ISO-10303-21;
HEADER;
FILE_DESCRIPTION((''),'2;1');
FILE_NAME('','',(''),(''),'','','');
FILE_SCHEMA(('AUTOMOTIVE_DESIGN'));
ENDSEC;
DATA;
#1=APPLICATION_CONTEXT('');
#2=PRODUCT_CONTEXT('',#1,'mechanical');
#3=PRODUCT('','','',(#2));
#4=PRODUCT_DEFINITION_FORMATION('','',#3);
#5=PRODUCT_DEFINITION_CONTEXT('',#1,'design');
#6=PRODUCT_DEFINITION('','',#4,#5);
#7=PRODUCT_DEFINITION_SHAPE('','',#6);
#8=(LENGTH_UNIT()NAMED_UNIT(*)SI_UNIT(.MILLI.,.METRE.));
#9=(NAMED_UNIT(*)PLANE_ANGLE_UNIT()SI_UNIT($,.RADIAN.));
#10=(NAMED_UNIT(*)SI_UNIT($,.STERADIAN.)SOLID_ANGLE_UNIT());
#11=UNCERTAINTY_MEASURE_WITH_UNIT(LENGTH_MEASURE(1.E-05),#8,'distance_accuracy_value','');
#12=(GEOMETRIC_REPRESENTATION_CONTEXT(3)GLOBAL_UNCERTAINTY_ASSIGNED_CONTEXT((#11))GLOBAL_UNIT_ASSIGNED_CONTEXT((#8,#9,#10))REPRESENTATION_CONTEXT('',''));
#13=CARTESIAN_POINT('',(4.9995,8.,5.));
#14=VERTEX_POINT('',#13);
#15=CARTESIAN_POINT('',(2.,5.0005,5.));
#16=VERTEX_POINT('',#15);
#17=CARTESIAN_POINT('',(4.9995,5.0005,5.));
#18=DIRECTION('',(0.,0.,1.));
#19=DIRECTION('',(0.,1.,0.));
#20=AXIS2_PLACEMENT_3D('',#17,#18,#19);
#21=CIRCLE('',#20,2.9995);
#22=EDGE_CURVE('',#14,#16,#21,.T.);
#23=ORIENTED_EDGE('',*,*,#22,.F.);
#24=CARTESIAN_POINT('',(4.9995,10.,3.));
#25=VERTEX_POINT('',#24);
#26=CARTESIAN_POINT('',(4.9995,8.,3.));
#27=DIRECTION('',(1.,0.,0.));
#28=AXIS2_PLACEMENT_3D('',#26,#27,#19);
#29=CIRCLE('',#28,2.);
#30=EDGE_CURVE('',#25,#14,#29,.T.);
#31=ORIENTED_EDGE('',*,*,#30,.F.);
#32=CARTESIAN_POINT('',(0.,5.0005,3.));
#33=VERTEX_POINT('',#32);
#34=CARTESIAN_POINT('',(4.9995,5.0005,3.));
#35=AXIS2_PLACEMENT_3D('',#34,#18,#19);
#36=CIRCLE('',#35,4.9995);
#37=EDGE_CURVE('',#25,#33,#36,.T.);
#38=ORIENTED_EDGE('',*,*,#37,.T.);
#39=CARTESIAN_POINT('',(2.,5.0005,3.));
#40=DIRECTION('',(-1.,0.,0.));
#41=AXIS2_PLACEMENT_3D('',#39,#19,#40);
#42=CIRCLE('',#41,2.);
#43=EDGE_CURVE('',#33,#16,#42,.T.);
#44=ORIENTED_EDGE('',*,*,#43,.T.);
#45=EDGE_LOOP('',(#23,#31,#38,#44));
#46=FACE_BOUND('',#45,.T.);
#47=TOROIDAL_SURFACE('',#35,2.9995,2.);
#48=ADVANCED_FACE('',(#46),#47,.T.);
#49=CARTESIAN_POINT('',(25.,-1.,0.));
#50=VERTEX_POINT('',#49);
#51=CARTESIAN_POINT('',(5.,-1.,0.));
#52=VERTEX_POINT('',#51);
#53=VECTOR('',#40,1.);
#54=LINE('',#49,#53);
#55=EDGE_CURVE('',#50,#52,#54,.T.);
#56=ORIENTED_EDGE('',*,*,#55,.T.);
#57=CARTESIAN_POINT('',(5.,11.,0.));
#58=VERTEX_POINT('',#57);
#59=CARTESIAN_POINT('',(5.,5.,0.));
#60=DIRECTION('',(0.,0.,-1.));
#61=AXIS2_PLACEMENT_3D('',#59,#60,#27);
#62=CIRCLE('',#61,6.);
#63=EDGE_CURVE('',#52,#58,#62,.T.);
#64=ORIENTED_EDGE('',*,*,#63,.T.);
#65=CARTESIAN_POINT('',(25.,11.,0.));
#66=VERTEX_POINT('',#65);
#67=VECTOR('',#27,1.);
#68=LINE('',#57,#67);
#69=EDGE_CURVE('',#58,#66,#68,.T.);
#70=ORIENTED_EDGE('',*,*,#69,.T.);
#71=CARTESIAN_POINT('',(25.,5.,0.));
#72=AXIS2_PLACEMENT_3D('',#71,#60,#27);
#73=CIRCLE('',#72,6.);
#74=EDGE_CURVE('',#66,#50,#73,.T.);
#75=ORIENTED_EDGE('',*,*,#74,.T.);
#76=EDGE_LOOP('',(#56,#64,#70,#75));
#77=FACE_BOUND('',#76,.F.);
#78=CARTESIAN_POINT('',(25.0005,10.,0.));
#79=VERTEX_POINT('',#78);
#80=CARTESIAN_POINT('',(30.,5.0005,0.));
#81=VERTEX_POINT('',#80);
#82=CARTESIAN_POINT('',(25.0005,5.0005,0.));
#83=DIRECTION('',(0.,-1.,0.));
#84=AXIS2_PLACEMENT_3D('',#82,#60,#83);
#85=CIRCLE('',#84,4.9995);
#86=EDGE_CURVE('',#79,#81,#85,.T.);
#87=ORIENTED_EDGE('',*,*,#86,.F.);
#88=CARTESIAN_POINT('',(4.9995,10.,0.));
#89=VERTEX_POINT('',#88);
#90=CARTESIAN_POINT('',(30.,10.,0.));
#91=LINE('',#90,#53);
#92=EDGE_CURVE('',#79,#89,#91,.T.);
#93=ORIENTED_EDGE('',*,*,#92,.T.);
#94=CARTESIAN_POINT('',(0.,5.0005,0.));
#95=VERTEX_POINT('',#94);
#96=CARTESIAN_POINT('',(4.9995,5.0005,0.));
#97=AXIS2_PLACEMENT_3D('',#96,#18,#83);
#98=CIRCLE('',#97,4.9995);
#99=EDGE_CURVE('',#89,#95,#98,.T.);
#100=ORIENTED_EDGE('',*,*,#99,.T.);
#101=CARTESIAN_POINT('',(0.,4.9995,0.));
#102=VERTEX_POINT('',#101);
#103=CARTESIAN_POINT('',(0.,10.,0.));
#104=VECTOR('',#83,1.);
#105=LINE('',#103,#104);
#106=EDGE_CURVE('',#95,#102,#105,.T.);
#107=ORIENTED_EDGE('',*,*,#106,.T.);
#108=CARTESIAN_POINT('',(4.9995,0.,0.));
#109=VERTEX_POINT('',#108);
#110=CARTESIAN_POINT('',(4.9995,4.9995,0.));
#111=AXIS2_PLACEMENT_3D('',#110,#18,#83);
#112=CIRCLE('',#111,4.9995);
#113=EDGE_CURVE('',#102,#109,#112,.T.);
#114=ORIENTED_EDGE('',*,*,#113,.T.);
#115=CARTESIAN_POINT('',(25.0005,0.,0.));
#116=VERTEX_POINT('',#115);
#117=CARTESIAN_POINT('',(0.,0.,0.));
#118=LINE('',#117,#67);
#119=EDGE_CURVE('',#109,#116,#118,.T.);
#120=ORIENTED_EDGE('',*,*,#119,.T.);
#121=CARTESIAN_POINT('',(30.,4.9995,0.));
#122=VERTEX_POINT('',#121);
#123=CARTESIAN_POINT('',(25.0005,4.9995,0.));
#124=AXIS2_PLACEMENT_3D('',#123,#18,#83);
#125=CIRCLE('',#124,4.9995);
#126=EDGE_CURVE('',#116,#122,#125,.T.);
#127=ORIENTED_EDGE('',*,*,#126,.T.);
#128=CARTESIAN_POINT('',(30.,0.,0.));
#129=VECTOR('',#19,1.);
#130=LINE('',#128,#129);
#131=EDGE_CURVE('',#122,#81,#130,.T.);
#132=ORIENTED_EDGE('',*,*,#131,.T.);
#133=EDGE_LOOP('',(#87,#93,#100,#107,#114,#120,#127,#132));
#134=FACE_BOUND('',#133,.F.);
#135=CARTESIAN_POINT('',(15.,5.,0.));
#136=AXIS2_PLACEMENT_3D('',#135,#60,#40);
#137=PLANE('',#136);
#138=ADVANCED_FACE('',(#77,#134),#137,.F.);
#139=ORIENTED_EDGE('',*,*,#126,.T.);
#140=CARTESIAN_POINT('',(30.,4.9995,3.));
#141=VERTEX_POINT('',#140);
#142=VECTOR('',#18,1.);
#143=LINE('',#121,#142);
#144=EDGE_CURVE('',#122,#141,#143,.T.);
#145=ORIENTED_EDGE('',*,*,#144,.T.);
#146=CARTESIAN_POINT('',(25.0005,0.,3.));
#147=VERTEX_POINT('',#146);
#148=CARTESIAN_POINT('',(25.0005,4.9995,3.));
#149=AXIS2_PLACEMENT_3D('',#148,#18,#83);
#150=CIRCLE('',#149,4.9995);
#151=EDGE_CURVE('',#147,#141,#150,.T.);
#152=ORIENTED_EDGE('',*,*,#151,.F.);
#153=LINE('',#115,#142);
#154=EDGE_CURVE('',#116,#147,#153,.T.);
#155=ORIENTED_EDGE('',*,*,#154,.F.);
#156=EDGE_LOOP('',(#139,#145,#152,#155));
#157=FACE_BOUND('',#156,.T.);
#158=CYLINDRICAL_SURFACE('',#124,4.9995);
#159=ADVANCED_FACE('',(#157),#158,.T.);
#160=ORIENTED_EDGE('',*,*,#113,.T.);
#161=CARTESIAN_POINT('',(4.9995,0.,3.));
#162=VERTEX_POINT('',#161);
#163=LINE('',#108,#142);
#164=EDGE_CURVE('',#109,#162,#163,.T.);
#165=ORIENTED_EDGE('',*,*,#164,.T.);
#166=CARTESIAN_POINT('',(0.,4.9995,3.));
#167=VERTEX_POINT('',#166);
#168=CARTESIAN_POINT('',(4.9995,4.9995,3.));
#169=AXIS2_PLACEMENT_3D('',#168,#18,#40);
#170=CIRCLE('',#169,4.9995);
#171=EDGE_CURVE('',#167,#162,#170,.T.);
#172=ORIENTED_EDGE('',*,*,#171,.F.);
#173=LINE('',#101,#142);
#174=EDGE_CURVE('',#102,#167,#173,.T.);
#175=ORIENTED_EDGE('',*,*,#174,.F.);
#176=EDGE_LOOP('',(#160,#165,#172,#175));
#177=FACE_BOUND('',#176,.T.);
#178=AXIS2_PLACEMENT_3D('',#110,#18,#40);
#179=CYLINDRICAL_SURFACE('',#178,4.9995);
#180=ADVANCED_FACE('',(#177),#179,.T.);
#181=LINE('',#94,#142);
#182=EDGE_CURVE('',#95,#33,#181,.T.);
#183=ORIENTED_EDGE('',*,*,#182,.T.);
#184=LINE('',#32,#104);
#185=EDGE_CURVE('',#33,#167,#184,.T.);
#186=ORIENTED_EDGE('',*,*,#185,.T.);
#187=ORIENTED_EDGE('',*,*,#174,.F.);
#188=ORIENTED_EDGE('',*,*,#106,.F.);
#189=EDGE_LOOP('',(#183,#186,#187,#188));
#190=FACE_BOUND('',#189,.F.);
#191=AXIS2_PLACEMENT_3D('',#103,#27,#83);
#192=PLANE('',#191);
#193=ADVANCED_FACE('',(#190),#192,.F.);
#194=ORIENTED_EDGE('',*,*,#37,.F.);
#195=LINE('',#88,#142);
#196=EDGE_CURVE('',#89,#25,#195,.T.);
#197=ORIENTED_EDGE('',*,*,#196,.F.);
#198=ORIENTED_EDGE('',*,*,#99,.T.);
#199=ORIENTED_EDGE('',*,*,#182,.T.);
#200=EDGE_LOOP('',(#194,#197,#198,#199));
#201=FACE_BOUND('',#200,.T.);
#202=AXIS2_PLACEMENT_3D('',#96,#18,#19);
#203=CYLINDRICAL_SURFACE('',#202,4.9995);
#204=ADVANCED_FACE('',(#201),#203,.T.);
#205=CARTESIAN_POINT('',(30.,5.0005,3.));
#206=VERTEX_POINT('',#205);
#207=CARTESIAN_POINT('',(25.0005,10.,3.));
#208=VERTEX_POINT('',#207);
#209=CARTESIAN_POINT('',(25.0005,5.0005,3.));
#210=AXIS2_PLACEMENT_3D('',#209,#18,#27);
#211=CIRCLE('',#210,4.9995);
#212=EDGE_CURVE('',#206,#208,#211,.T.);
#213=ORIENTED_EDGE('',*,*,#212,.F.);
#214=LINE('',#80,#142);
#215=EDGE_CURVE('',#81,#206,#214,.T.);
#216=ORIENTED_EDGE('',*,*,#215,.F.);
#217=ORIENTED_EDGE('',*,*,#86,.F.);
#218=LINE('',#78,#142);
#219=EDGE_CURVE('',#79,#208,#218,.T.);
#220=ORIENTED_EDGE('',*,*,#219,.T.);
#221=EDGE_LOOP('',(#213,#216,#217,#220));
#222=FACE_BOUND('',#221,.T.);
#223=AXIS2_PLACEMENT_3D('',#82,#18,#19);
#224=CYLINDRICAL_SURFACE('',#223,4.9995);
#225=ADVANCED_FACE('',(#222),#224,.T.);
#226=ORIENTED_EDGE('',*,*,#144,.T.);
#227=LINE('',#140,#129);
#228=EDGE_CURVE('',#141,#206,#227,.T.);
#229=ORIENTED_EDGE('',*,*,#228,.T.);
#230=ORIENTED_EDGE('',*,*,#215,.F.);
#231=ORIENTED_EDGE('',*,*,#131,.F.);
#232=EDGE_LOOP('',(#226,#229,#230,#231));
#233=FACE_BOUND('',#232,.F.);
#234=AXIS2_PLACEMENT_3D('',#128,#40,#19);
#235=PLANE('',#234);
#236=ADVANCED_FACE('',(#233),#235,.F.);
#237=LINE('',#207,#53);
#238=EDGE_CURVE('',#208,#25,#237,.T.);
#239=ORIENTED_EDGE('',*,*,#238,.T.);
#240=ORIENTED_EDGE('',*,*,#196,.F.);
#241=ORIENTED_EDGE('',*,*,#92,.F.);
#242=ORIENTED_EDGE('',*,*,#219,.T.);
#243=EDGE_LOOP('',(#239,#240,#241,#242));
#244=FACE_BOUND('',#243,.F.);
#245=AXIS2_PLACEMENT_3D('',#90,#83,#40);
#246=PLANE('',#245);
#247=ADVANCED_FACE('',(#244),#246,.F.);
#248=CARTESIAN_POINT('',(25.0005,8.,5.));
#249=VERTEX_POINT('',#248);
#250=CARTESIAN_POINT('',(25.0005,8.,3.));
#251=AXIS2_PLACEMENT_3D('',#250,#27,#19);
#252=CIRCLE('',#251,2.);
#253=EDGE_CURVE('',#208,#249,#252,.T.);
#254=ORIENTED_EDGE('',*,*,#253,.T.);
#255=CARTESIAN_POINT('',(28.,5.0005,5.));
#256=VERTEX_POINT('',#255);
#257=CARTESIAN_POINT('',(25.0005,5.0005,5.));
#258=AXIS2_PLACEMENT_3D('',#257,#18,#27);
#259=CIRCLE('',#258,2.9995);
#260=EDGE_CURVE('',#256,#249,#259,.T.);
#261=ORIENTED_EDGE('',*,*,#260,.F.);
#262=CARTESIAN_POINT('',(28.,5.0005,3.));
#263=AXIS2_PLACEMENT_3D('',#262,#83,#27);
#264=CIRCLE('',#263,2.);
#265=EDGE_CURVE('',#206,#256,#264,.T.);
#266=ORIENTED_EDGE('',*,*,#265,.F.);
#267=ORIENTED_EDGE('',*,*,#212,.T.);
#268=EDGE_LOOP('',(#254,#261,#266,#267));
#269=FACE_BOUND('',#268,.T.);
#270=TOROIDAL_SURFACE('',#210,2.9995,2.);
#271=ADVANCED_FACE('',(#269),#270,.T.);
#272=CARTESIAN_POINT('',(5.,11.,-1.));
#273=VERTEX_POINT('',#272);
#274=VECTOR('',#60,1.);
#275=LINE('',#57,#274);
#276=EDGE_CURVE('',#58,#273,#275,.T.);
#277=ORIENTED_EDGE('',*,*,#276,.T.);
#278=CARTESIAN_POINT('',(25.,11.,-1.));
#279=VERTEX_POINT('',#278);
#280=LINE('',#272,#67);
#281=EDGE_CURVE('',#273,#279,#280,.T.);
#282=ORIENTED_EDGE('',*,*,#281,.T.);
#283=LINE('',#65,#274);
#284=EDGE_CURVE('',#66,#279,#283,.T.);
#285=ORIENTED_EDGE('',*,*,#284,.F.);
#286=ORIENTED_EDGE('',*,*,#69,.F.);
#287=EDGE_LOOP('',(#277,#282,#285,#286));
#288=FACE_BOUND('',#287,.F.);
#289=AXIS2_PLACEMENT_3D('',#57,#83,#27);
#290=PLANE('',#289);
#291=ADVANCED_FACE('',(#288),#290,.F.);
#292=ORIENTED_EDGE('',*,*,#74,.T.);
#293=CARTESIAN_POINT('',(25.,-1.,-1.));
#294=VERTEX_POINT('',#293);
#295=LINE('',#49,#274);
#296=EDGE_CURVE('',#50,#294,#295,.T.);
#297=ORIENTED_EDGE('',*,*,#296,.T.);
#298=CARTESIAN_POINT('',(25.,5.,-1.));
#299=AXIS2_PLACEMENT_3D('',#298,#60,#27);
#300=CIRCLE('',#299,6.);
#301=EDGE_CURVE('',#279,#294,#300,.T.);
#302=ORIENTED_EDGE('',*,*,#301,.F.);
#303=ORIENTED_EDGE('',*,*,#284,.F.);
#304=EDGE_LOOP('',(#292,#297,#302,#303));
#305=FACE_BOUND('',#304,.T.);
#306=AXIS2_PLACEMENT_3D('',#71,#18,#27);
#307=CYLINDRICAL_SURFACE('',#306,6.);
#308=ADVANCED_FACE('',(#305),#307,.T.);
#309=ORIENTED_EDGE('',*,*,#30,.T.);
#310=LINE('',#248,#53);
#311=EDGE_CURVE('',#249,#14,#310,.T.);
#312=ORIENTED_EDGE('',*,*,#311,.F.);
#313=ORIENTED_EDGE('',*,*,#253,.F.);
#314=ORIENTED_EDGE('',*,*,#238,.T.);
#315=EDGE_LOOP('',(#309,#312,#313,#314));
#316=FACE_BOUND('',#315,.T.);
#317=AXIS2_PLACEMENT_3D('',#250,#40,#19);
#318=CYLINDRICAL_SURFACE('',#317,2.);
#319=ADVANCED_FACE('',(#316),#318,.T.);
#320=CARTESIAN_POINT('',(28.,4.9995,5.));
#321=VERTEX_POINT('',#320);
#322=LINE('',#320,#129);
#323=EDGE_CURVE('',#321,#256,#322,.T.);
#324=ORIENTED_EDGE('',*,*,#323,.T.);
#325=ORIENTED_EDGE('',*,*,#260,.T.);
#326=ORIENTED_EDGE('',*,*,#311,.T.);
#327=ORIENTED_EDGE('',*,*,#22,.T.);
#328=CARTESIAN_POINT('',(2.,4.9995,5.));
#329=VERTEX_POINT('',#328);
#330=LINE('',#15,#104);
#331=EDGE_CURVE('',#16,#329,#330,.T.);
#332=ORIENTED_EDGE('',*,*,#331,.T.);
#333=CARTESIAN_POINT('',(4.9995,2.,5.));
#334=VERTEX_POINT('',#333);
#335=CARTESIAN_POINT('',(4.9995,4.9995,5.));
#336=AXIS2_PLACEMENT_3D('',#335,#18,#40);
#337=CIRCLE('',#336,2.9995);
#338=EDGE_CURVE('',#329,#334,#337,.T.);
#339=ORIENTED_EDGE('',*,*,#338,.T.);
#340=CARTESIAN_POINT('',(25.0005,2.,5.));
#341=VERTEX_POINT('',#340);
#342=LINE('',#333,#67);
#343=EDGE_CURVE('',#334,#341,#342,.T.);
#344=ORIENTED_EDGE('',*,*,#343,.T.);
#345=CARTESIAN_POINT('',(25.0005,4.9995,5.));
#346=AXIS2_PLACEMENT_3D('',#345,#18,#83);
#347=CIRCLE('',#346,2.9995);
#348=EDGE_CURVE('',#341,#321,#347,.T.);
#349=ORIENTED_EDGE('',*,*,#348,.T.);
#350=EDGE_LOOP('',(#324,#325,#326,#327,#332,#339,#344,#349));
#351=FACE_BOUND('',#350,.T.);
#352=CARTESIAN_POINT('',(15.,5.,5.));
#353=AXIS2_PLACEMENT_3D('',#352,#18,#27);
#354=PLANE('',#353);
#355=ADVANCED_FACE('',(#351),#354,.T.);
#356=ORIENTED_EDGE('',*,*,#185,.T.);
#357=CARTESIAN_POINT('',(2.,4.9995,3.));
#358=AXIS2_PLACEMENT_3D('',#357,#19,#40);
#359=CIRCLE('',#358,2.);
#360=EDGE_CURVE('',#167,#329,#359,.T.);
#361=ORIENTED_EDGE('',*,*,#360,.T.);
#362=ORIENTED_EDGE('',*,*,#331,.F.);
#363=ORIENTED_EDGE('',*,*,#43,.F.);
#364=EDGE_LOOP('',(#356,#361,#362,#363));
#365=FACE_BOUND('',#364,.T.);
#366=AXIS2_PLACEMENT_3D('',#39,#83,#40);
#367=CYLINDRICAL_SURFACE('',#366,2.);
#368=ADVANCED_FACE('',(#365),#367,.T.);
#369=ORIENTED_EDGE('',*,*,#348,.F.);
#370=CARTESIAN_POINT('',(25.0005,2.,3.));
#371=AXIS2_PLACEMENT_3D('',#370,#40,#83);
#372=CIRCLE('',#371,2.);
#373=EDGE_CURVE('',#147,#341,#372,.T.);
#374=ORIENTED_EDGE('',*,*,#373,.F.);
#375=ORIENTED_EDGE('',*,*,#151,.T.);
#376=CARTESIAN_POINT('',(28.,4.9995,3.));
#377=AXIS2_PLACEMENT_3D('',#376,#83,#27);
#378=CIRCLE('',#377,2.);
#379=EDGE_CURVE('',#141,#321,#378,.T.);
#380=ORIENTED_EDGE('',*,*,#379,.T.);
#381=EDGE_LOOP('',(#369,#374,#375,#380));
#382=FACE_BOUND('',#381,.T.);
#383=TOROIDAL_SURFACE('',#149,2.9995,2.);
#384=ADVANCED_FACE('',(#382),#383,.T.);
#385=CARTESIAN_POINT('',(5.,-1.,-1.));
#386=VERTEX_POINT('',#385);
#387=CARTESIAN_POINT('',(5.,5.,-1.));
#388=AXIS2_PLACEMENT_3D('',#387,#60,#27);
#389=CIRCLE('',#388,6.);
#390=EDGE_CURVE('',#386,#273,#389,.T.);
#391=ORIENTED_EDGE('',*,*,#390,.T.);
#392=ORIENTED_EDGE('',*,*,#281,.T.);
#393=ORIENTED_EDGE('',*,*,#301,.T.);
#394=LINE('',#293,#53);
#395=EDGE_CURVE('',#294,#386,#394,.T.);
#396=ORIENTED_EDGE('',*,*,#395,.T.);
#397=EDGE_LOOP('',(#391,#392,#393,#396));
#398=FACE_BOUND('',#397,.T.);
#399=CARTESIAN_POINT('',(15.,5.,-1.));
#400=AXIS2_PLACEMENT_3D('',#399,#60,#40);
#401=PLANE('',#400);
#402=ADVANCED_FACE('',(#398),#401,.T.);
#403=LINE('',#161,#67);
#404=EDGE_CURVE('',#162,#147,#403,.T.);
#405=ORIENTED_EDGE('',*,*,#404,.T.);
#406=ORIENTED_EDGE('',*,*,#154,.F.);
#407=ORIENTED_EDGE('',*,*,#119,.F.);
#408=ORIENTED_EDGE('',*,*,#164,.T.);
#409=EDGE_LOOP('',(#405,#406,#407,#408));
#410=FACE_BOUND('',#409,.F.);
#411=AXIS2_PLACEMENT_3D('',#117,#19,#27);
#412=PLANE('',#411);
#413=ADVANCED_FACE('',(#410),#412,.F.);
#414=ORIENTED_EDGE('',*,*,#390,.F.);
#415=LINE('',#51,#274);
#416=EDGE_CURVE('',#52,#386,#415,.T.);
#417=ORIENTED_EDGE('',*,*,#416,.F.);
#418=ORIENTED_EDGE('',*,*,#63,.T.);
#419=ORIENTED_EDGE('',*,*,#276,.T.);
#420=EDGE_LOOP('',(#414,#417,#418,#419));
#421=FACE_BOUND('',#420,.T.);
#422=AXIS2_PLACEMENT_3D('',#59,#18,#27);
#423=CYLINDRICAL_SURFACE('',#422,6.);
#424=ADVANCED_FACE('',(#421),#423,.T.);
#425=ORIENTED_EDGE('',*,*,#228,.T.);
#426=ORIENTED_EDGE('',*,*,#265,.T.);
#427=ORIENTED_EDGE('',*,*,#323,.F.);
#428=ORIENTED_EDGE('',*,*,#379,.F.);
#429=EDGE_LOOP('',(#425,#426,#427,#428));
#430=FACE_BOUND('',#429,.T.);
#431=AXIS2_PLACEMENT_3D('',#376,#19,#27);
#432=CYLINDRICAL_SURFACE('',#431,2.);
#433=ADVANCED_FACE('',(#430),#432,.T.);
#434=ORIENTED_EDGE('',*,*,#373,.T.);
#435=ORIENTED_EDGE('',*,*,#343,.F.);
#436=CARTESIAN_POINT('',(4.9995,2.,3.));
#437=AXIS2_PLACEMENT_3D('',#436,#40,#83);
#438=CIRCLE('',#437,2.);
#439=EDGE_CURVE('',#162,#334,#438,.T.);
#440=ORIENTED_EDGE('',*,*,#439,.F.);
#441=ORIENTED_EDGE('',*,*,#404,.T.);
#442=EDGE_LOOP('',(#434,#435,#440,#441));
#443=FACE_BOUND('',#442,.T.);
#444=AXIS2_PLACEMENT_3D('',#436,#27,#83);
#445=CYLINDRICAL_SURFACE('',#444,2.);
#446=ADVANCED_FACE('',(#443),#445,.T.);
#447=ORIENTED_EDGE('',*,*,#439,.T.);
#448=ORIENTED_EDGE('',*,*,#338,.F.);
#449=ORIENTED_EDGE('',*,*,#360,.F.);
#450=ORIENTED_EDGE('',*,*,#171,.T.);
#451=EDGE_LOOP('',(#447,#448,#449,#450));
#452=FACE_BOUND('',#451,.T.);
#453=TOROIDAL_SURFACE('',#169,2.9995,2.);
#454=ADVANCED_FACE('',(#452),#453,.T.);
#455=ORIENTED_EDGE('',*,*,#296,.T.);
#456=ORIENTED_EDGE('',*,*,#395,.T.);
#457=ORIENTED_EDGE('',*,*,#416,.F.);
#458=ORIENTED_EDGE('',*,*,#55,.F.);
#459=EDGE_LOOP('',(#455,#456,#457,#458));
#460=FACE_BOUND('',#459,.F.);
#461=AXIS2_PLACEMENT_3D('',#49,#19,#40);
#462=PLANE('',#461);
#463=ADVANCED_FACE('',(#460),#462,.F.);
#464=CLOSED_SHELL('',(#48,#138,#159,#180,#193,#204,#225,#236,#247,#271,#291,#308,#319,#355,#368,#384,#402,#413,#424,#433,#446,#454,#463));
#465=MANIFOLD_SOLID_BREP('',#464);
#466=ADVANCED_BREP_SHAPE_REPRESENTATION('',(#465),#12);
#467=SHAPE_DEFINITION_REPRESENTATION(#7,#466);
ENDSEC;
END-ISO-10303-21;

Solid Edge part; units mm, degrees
sketch "Sketch1" plane through (0, 0, 0) normal (0, 0, 1) x (1, 0, 0)
  line L0 (30, 10) -> (0, 10)
  line L1 (0, 10) -> (0, 0)
  line L2 (0, 0) -> (30, 0)
  line L3 (30, 0) -> (30, 10)
extrude "Protrusion1" add sketch "Sketch1" along normal blind 5
fillet "Round_1" radius 5 4 edges at (30, 0, 2.5) (30, 10, 2.5) (0, 10, 2.5) (0, 0, 2.5)
fillet "Round_2" radius 2 3 edges at (15, 10, 5) (0, 5, 5) (15, 0, 5)
sketch "Sketch2" plane through (15, 5, 0) normal (0, 0, -1) x (1, 0, 0)
  line L0 (10, 6) -> (-10, 6)
  arc A0 (-10, 6) -> (-10, -6) centre (-10, 0) ccw
  line L1 (-10, -6) -> (10, -6)
  arc A1 (10, -6) -> (10, 6) centre (10, 0) ccw
extrude "ExtrudedProtrusion_2" add sketch "Sketch2" along normal blind 1
properties material "ABS Plastic, high impact"
